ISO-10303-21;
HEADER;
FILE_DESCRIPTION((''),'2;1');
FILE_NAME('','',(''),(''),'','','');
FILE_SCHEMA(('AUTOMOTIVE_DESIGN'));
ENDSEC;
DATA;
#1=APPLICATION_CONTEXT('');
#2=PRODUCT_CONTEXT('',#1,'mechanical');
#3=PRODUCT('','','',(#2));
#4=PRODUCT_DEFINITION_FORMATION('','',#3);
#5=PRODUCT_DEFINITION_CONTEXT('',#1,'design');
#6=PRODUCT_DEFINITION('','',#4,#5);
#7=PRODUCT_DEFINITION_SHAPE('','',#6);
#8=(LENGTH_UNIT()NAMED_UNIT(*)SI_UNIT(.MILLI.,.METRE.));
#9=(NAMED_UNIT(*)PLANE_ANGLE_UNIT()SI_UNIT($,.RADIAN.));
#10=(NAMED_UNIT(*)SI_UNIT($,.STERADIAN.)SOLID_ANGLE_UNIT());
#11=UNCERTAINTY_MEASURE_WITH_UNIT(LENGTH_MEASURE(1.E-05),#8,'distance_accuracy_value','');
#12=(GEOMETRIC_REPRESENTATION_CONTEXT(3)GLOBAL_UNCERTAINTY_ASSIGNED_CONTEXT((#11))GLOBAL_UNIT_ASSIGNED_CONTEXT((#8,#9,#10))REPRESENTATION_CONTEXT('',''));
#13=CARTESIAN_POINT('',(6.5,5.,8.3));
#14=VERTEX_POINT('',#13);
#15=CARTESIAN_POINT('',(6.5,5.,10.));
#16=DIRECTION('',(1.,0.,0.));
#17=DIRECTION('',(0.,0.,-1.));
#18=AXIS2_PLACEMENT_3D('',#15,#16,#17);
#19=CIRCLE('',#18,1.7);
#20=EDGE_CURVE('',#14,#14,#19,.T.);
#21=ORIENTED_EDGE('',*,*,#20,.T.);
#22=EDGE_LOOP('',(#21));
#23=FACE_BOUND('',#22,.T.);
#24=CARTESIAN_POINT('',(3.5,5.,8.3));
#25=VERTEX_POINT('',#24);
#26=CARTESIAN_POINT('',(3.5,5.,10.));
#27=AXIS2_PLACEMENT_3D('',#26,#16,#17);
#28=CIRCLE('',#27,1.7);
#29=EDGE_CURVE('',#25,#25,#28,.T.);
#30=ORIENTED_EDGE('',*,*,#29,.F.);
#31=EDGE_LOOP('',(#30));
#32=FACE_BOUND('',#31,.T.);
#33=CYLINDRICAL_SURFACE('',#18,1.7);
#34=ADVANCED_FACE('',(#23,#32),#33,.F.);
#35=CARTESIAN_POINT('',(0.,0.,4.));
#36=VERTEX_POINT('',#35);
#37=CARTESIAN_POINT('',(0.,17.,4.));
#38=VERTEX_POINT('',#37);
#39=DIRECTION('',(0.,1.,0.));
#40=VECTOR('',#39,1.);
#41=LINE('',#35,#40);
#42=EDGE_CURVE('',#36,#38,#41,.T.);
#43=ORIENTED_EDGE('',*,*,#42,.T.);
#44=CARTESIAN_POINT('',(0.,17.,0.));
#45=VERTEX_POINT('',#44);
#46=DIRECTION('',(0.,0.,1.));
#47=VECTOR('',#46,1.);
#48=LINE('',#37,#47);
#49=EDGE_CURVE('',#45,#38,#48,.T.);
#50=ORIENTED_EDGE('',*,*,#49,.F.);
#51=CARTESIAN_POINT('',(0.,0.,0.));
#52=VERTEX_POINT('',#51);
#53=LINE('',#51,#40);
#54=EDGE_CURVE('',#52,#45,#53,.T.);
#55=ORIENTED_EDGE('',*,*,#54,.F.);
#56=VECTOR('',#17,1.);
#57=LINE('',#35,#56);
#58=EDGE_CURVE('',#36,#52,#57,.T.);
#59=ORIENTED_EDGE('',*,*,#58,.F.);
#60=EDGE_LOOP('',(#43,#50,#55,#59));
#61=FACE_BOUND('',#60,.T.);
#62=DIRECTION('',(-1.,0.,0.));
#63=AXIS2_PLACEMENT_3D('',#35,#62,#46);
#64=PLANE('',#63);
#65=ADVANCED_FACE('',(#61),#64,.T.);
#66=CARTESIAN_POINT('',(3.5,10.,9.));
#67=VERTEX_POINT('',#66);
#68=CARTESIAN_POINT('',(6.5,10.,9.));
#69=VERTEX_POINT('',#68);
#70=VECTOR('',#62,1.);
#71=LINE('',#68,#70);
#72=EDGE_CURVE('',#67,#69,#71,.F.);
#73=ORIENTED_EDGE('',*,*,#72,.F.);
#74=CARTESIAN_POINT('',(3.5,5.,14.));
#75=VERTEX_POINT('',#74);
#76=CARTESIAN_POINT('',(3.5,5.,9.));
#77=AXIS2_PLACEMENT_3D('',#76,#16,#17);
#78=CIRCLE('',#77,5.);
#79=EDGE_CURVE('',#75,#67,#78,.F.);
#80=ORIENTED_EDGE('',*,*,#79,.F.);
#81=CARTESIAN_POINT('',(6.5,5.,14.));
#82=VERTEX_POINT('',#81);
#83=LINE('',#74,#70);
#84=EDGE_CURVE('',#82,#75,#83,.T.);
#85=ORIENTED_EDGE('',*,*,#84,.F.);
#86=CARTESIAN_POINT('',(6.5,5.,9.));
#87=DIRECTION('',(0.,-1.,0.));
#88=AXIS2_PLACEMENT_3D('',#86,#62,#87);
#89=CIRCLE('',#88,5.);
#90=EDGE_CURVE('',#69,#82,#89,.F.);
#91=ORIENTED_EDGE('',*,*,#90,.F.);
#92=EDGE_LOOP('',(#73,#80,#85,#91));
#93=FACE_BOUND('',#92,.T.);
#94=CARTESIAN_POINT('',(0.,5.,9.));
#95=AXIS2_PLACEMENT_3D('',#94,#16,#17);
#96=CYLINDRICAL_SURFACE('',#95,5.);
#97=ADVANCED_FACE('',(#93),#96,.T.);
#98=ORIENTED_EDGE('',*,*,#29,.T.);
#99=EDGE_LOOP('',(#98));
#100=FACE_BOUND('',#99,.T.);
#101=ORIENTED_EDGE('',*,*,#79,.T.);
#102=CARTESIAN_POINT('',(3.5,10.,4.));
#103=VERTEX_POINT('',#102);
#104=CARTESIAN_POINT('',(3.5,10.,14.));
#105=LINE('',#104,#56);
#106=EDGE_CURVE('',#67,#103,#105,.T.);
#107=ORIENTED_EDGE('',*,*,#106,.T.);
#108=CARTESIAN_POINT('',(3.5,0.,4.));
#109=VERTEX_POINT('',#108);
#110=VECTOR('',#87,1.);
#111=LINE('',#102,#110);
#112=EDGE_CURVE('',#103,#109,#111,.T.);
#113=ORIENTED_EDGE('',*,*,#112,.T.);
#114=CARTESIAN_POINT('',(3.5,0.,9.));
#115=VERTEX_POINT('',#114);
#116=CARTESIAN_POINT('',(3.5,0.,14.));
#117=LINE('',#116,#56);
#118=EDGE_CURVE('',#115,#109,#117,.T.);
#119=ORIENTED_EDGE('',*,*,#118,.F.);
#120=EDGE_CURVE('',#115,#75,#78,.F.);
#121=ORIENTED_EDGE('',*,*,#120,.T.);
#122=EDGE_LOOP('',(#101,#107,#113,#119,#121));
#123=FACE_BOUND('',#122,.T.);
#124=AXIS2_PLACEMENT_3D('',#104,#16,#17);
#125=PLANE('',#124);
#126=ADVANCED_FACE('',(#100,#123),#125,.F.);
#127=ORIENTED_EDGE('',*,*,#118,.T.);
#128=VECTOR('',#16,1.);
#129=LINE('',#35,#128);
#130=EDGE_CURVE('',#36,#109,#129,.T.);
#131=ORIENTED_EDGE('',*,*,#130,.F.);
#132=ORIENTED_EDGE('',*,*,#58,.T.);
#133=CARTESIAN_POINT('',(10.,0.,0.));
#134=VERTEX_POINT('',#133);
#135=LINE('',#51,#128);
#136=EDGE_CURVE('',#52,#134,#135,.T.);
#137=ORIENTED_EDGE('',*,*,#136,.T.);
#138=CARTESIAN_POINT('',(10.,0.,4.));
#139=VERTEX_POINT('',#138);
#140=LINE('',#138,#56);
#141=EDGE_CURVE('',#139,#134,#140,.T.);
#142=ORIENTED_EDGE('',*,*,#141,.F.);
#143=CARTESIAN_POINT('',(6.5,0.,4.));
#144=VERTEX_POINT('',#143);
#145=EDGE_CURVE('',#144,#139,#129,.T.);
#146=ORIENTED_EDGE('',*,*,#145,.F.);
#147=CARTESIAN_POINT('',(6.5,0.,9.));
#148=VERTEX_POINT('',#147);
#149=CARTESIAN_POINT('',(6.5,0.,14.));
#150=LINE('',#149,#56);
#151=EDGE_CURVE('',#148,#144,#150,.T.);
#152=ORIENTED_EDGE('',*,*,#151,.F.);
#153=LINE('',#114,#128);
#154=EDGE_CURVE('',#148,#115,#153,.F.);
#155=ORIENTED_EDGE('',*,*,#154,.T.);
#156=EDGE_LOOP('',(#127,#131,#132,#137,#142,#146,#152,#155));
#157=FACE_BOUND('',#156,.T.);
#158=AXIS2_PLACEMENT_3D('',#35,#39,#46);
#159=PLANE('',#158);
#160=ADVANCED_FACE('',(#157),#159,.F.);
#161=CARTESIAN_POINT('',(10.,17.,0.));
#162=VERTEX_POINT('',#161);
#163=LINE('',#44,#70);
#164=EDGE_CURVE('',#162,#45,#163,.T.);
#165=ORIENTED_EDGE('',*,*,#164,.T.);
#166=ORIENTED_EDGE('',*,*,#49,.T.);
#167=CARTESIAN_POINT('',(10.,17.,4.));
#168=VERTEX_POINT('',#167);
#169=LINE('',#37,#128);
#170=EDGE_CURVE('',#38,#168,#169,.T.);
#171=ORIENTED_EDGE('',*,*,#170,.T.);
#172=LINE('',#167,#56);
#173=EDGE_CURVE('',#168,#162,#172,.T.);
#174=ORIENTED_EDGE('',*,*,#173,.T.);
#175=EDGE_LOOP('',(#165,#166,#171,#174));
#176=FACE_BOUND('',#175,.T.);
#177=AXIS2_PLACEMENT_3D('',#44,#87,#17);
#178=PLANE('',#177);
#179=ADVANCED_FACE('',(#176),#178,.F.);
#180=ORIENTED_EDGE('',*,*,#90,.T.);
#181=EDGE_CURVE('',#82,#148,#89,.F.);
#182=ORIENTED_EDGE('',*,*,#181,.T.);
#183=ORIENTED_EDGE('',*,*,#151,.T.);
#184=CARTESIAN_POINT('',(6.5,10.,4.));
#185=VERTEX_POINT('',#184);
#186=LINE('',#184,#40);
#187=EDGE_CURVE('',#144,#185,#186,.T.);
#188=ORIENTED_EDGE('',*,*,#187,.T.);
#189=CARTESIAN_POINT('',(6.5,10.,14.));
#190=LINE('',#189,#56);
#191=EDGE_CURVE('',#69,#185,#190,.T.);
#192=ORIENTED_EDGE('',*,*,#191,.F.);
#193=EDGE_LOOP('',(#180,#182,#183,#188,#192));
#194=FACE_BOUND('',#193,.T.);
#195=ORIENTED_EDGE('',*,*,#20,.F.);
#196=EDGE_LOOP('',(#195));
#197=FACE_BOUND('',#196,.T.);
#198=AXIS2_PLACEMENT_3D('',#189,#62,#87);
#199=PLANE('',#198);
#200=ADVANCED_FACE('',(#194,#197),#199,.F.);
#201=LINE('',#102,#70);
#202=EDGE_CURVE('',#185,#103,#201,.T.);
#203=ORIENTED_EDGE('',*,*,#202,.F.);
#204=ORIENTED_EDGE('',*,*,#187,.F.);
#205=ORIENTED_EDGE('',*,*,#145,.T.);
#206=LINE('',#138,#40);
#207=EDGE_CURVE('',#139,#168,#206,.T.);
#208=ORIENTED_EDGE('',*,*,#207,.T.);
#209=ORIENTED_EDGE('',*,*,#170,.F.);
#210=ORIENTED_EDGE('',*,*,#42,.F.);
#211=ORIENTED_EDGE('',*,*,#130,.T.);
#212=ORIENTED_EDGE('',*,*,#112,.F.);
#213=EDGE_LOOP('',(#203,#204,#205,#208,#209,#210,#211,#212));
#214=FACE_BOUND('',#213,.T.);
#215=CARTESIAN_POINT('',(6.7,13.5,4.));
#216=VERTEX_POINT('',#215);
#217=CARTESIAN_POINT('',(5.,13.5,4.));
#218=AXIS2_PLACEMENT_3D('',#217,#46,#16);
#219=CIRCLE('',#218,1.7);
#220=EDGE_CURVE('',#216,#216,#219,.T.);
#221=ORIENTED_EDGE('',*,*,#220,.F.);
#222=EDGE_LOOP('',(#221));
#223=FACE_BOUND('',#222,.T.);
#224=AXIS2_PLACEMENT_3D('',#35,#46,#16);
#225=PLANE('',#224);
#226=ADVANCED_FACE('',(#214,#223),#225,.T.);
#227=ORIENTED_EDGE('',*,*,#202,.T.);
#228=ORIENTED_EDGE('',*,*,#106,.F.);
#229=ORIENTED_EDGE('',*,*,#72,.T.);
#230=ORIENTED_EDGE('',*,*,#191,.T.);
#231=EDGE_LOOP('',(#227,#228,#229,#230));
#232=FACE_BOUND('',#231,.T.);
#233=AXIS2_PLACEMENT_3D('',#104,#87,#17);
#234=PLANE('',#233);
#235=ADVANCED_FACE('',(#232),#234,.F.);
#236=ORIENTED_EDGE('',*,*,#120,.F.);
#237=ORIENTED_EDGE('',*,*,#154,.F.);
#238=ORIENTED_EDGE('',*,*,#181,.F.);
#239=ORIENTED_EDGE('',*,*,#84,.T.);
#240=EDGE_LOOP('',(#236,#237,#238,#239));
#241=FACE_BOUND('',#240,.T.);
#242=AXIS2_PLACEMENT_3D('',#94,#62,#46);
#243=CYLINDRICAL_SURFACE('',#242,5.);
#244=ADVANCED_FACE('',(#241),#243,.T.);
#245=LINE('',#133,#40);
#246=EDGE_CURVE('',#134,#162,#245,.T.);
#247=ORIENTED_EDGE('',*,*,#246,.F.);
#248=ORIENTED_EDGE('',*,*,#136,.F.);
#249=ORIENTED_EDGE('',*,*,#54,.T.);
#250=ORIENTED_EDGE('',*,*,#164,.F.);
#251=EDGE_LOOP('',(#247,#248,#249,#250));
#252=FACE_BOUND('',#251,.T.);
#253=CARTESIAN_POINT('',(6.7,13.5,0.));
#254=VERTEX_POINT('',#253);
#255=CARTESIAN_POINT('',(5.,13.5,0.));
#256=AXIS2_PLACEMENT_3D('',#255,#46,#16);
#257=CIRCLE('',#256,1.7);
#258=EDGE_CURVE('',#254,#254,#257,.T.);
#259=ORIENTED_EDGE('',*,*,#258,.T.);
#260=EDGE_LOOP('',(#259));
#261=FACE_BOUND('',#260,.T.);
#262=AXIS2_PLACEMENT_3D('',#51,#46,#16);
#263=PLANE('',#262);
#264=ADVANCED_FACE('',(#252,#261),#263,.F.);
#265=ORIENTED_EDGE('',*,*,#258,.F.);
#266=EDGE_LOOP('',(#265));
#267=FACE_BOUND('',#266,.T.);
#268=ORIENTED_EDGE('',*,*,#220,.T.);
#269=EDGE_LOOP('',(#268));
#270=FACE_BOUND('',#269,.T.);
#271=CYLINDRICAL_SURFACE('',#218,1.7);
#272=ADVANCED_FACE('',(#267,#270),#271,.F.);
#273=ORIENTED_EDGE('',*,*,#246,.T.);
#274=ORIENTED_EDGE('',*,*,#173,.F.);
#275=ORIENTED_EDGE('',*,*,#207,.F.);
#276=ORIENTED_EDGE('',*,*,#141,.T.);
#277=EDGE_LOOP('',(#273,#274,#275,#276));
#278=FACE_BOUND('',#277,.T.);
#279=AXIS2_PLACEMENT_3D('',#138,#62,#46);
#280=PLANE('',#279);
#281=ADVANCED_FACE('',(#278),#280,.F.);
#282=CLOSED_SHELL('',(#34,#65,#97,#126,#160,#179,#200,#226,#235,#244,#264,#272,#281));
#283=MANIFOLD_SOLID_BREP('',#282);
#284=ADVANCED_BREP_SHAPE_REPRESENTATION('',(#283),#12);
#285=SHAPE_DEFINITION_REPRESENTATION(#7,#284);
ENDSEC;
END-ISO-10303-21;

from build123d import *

# Parameters (mm, degrees)
SKETCH1_W                = 3
SKETCH1_H                = 10
BOSS_EXTRUDE1_DEPTH      = 4
SKETCH2_W                = 3
SKETCH2_H                = 10
BOSS_EXTRUDE2_DEPTH      = 10
FILLET1_R                = 5
M3_CLEARANCE_HOLE1_D     = 3.4
M3_CLEARANCE_HOLE1_DEPTH = 70
M3_CLEARANCE_HOLE1_TIP   = 1.021463052
SKETCH6_W                = 10
SKETCH6_H                = 4
BOSS_EXTRUDE3_DEPTH      = 2
M3_CLEARANCE_HOLE2_D     = 3.4
M3_CLEARANCE_HOLE2_DEPTH = 70
M3_CLEARANCE_HOLE2_TIP   = 1.021463052
M3_CLEARANCE_HOLE3_D     = 3.4
M3_CLEARANCE_HOLE3_DEPTH = 70
M3_CLEARANCE_HOLE3_TIP   = 1.021463052


with BuildPart() as part:
    # Sketch1 → Boss-Extrude1 (new body)
    with BuildSketch(Plane.XY):
        Polygon((0, 15), (0, 0), (3.241791175, 0), (3.241791175, 10), (6.241791175, 10), (6.241791175, 0), (10, 0), (10, 15), align=None)
        with Locations((4.741791175, 5)):
            Rectangle(SKETCH1_W, SKETCH1_H)
    extrude(amount=BOSS_EXTRUDE1_DEPTH)

    # Sketch2 → Boss-Extrude2 (add)
    with BuildSketch(Plane.XY.offset(4)):
        with Locations((5, 5)):
            Rectangle(SKETCH2_W, SKETCH2_H)
    extrude(amount=BOSS_EXTRUDE2_DEPTH)

    # Fillet1
    fillet1_edges = [part.edges().sort_by_distance(p)[0] for p in [
        (5, 0, 14),
        (5, 10, 14),
    ]]
    fillet(fillet1_edges, radius=FILLET1_R - 0.0001)  # a hair under: the kernel refuses the full size

    # M3 Clearance Hole1
    with Locations(Plane.XY.offset(4)):
        with Locations((5, 13.5), (12.547675822, 14.055863144)):
            Hole(M3_CLEARANCE_HOLE1_D / 2, depth=M3_CLEARANCE_HOLE1_DEPTH)
            with Locations((0, 0, -(M3_CLEARANCE_HOLE1_DEPTH + M3_CLEARANCE_HOLE1_TIP / 2))):  # 118° drill point
                Cone(0, M3_CLEARANCE_HOLE1_D / 2, M3_CLEARANCE_HOLE1_TIP, mode=Mode.SUBTRACT)

    # Sketch6 → Boss-Extrude3 (add)
    with BuildSketch(Plane(origin=(0, 15, 0), x_dir=(1, 0, 0), z_dir=(0, 1, 0))):
        with Locations((5, -2)):
            Rectangle(SKETCH6_W, SKETCH6_H)
    extrude(amount=BOSS_EXTRUDE3_DEPTH)

    # M3 Clearance Hole2
    with Locations(Plane.XY.offset(4)):
        with Locations((5, 13.5)):
            Hole(M3_CLEARANCE_HOLE2_D / 2, depth=M3_CLEARANCE_HOLE2_DEPTH)
            with Locations((0, 0, -(M3_CLEARANCE_HOLE2_DEPTH + M3_CLEARANCE_HOLE2_TIP / 2))):  # 118° drill point
                Cone(0, M3_CLEARANCE_HOLE2_D / 2, M3_CLEARANCE_HOLE2_TIP, mode=Mode.SUBTRACT)

    # M3 Clearance Hole3
    with Locations(Plane(origin=(6.5, 0, 0), x_dir=(0, 0, -1), z_dir=(1, 0, 0))):
        with Locations((-10, 5)):
            Hole(M3_CLEARANCE_HOLE3_D / 2, depth=M3_CLEARANCE_HOLE3_DEPTH)
            with Locations((0, 0, -(M3_CLEARANCE_HOLE3_DEPTH + M3_CLEARANCE_HOLE3_TIP / 2))):  # 118° drill point
                Cone(0, M3_CLEARANCE_HOLE3_D / 2, M3_CLEARANCE_HOLE3_TIP, mode=Mode.SUBTRACT)


solid = part.part
